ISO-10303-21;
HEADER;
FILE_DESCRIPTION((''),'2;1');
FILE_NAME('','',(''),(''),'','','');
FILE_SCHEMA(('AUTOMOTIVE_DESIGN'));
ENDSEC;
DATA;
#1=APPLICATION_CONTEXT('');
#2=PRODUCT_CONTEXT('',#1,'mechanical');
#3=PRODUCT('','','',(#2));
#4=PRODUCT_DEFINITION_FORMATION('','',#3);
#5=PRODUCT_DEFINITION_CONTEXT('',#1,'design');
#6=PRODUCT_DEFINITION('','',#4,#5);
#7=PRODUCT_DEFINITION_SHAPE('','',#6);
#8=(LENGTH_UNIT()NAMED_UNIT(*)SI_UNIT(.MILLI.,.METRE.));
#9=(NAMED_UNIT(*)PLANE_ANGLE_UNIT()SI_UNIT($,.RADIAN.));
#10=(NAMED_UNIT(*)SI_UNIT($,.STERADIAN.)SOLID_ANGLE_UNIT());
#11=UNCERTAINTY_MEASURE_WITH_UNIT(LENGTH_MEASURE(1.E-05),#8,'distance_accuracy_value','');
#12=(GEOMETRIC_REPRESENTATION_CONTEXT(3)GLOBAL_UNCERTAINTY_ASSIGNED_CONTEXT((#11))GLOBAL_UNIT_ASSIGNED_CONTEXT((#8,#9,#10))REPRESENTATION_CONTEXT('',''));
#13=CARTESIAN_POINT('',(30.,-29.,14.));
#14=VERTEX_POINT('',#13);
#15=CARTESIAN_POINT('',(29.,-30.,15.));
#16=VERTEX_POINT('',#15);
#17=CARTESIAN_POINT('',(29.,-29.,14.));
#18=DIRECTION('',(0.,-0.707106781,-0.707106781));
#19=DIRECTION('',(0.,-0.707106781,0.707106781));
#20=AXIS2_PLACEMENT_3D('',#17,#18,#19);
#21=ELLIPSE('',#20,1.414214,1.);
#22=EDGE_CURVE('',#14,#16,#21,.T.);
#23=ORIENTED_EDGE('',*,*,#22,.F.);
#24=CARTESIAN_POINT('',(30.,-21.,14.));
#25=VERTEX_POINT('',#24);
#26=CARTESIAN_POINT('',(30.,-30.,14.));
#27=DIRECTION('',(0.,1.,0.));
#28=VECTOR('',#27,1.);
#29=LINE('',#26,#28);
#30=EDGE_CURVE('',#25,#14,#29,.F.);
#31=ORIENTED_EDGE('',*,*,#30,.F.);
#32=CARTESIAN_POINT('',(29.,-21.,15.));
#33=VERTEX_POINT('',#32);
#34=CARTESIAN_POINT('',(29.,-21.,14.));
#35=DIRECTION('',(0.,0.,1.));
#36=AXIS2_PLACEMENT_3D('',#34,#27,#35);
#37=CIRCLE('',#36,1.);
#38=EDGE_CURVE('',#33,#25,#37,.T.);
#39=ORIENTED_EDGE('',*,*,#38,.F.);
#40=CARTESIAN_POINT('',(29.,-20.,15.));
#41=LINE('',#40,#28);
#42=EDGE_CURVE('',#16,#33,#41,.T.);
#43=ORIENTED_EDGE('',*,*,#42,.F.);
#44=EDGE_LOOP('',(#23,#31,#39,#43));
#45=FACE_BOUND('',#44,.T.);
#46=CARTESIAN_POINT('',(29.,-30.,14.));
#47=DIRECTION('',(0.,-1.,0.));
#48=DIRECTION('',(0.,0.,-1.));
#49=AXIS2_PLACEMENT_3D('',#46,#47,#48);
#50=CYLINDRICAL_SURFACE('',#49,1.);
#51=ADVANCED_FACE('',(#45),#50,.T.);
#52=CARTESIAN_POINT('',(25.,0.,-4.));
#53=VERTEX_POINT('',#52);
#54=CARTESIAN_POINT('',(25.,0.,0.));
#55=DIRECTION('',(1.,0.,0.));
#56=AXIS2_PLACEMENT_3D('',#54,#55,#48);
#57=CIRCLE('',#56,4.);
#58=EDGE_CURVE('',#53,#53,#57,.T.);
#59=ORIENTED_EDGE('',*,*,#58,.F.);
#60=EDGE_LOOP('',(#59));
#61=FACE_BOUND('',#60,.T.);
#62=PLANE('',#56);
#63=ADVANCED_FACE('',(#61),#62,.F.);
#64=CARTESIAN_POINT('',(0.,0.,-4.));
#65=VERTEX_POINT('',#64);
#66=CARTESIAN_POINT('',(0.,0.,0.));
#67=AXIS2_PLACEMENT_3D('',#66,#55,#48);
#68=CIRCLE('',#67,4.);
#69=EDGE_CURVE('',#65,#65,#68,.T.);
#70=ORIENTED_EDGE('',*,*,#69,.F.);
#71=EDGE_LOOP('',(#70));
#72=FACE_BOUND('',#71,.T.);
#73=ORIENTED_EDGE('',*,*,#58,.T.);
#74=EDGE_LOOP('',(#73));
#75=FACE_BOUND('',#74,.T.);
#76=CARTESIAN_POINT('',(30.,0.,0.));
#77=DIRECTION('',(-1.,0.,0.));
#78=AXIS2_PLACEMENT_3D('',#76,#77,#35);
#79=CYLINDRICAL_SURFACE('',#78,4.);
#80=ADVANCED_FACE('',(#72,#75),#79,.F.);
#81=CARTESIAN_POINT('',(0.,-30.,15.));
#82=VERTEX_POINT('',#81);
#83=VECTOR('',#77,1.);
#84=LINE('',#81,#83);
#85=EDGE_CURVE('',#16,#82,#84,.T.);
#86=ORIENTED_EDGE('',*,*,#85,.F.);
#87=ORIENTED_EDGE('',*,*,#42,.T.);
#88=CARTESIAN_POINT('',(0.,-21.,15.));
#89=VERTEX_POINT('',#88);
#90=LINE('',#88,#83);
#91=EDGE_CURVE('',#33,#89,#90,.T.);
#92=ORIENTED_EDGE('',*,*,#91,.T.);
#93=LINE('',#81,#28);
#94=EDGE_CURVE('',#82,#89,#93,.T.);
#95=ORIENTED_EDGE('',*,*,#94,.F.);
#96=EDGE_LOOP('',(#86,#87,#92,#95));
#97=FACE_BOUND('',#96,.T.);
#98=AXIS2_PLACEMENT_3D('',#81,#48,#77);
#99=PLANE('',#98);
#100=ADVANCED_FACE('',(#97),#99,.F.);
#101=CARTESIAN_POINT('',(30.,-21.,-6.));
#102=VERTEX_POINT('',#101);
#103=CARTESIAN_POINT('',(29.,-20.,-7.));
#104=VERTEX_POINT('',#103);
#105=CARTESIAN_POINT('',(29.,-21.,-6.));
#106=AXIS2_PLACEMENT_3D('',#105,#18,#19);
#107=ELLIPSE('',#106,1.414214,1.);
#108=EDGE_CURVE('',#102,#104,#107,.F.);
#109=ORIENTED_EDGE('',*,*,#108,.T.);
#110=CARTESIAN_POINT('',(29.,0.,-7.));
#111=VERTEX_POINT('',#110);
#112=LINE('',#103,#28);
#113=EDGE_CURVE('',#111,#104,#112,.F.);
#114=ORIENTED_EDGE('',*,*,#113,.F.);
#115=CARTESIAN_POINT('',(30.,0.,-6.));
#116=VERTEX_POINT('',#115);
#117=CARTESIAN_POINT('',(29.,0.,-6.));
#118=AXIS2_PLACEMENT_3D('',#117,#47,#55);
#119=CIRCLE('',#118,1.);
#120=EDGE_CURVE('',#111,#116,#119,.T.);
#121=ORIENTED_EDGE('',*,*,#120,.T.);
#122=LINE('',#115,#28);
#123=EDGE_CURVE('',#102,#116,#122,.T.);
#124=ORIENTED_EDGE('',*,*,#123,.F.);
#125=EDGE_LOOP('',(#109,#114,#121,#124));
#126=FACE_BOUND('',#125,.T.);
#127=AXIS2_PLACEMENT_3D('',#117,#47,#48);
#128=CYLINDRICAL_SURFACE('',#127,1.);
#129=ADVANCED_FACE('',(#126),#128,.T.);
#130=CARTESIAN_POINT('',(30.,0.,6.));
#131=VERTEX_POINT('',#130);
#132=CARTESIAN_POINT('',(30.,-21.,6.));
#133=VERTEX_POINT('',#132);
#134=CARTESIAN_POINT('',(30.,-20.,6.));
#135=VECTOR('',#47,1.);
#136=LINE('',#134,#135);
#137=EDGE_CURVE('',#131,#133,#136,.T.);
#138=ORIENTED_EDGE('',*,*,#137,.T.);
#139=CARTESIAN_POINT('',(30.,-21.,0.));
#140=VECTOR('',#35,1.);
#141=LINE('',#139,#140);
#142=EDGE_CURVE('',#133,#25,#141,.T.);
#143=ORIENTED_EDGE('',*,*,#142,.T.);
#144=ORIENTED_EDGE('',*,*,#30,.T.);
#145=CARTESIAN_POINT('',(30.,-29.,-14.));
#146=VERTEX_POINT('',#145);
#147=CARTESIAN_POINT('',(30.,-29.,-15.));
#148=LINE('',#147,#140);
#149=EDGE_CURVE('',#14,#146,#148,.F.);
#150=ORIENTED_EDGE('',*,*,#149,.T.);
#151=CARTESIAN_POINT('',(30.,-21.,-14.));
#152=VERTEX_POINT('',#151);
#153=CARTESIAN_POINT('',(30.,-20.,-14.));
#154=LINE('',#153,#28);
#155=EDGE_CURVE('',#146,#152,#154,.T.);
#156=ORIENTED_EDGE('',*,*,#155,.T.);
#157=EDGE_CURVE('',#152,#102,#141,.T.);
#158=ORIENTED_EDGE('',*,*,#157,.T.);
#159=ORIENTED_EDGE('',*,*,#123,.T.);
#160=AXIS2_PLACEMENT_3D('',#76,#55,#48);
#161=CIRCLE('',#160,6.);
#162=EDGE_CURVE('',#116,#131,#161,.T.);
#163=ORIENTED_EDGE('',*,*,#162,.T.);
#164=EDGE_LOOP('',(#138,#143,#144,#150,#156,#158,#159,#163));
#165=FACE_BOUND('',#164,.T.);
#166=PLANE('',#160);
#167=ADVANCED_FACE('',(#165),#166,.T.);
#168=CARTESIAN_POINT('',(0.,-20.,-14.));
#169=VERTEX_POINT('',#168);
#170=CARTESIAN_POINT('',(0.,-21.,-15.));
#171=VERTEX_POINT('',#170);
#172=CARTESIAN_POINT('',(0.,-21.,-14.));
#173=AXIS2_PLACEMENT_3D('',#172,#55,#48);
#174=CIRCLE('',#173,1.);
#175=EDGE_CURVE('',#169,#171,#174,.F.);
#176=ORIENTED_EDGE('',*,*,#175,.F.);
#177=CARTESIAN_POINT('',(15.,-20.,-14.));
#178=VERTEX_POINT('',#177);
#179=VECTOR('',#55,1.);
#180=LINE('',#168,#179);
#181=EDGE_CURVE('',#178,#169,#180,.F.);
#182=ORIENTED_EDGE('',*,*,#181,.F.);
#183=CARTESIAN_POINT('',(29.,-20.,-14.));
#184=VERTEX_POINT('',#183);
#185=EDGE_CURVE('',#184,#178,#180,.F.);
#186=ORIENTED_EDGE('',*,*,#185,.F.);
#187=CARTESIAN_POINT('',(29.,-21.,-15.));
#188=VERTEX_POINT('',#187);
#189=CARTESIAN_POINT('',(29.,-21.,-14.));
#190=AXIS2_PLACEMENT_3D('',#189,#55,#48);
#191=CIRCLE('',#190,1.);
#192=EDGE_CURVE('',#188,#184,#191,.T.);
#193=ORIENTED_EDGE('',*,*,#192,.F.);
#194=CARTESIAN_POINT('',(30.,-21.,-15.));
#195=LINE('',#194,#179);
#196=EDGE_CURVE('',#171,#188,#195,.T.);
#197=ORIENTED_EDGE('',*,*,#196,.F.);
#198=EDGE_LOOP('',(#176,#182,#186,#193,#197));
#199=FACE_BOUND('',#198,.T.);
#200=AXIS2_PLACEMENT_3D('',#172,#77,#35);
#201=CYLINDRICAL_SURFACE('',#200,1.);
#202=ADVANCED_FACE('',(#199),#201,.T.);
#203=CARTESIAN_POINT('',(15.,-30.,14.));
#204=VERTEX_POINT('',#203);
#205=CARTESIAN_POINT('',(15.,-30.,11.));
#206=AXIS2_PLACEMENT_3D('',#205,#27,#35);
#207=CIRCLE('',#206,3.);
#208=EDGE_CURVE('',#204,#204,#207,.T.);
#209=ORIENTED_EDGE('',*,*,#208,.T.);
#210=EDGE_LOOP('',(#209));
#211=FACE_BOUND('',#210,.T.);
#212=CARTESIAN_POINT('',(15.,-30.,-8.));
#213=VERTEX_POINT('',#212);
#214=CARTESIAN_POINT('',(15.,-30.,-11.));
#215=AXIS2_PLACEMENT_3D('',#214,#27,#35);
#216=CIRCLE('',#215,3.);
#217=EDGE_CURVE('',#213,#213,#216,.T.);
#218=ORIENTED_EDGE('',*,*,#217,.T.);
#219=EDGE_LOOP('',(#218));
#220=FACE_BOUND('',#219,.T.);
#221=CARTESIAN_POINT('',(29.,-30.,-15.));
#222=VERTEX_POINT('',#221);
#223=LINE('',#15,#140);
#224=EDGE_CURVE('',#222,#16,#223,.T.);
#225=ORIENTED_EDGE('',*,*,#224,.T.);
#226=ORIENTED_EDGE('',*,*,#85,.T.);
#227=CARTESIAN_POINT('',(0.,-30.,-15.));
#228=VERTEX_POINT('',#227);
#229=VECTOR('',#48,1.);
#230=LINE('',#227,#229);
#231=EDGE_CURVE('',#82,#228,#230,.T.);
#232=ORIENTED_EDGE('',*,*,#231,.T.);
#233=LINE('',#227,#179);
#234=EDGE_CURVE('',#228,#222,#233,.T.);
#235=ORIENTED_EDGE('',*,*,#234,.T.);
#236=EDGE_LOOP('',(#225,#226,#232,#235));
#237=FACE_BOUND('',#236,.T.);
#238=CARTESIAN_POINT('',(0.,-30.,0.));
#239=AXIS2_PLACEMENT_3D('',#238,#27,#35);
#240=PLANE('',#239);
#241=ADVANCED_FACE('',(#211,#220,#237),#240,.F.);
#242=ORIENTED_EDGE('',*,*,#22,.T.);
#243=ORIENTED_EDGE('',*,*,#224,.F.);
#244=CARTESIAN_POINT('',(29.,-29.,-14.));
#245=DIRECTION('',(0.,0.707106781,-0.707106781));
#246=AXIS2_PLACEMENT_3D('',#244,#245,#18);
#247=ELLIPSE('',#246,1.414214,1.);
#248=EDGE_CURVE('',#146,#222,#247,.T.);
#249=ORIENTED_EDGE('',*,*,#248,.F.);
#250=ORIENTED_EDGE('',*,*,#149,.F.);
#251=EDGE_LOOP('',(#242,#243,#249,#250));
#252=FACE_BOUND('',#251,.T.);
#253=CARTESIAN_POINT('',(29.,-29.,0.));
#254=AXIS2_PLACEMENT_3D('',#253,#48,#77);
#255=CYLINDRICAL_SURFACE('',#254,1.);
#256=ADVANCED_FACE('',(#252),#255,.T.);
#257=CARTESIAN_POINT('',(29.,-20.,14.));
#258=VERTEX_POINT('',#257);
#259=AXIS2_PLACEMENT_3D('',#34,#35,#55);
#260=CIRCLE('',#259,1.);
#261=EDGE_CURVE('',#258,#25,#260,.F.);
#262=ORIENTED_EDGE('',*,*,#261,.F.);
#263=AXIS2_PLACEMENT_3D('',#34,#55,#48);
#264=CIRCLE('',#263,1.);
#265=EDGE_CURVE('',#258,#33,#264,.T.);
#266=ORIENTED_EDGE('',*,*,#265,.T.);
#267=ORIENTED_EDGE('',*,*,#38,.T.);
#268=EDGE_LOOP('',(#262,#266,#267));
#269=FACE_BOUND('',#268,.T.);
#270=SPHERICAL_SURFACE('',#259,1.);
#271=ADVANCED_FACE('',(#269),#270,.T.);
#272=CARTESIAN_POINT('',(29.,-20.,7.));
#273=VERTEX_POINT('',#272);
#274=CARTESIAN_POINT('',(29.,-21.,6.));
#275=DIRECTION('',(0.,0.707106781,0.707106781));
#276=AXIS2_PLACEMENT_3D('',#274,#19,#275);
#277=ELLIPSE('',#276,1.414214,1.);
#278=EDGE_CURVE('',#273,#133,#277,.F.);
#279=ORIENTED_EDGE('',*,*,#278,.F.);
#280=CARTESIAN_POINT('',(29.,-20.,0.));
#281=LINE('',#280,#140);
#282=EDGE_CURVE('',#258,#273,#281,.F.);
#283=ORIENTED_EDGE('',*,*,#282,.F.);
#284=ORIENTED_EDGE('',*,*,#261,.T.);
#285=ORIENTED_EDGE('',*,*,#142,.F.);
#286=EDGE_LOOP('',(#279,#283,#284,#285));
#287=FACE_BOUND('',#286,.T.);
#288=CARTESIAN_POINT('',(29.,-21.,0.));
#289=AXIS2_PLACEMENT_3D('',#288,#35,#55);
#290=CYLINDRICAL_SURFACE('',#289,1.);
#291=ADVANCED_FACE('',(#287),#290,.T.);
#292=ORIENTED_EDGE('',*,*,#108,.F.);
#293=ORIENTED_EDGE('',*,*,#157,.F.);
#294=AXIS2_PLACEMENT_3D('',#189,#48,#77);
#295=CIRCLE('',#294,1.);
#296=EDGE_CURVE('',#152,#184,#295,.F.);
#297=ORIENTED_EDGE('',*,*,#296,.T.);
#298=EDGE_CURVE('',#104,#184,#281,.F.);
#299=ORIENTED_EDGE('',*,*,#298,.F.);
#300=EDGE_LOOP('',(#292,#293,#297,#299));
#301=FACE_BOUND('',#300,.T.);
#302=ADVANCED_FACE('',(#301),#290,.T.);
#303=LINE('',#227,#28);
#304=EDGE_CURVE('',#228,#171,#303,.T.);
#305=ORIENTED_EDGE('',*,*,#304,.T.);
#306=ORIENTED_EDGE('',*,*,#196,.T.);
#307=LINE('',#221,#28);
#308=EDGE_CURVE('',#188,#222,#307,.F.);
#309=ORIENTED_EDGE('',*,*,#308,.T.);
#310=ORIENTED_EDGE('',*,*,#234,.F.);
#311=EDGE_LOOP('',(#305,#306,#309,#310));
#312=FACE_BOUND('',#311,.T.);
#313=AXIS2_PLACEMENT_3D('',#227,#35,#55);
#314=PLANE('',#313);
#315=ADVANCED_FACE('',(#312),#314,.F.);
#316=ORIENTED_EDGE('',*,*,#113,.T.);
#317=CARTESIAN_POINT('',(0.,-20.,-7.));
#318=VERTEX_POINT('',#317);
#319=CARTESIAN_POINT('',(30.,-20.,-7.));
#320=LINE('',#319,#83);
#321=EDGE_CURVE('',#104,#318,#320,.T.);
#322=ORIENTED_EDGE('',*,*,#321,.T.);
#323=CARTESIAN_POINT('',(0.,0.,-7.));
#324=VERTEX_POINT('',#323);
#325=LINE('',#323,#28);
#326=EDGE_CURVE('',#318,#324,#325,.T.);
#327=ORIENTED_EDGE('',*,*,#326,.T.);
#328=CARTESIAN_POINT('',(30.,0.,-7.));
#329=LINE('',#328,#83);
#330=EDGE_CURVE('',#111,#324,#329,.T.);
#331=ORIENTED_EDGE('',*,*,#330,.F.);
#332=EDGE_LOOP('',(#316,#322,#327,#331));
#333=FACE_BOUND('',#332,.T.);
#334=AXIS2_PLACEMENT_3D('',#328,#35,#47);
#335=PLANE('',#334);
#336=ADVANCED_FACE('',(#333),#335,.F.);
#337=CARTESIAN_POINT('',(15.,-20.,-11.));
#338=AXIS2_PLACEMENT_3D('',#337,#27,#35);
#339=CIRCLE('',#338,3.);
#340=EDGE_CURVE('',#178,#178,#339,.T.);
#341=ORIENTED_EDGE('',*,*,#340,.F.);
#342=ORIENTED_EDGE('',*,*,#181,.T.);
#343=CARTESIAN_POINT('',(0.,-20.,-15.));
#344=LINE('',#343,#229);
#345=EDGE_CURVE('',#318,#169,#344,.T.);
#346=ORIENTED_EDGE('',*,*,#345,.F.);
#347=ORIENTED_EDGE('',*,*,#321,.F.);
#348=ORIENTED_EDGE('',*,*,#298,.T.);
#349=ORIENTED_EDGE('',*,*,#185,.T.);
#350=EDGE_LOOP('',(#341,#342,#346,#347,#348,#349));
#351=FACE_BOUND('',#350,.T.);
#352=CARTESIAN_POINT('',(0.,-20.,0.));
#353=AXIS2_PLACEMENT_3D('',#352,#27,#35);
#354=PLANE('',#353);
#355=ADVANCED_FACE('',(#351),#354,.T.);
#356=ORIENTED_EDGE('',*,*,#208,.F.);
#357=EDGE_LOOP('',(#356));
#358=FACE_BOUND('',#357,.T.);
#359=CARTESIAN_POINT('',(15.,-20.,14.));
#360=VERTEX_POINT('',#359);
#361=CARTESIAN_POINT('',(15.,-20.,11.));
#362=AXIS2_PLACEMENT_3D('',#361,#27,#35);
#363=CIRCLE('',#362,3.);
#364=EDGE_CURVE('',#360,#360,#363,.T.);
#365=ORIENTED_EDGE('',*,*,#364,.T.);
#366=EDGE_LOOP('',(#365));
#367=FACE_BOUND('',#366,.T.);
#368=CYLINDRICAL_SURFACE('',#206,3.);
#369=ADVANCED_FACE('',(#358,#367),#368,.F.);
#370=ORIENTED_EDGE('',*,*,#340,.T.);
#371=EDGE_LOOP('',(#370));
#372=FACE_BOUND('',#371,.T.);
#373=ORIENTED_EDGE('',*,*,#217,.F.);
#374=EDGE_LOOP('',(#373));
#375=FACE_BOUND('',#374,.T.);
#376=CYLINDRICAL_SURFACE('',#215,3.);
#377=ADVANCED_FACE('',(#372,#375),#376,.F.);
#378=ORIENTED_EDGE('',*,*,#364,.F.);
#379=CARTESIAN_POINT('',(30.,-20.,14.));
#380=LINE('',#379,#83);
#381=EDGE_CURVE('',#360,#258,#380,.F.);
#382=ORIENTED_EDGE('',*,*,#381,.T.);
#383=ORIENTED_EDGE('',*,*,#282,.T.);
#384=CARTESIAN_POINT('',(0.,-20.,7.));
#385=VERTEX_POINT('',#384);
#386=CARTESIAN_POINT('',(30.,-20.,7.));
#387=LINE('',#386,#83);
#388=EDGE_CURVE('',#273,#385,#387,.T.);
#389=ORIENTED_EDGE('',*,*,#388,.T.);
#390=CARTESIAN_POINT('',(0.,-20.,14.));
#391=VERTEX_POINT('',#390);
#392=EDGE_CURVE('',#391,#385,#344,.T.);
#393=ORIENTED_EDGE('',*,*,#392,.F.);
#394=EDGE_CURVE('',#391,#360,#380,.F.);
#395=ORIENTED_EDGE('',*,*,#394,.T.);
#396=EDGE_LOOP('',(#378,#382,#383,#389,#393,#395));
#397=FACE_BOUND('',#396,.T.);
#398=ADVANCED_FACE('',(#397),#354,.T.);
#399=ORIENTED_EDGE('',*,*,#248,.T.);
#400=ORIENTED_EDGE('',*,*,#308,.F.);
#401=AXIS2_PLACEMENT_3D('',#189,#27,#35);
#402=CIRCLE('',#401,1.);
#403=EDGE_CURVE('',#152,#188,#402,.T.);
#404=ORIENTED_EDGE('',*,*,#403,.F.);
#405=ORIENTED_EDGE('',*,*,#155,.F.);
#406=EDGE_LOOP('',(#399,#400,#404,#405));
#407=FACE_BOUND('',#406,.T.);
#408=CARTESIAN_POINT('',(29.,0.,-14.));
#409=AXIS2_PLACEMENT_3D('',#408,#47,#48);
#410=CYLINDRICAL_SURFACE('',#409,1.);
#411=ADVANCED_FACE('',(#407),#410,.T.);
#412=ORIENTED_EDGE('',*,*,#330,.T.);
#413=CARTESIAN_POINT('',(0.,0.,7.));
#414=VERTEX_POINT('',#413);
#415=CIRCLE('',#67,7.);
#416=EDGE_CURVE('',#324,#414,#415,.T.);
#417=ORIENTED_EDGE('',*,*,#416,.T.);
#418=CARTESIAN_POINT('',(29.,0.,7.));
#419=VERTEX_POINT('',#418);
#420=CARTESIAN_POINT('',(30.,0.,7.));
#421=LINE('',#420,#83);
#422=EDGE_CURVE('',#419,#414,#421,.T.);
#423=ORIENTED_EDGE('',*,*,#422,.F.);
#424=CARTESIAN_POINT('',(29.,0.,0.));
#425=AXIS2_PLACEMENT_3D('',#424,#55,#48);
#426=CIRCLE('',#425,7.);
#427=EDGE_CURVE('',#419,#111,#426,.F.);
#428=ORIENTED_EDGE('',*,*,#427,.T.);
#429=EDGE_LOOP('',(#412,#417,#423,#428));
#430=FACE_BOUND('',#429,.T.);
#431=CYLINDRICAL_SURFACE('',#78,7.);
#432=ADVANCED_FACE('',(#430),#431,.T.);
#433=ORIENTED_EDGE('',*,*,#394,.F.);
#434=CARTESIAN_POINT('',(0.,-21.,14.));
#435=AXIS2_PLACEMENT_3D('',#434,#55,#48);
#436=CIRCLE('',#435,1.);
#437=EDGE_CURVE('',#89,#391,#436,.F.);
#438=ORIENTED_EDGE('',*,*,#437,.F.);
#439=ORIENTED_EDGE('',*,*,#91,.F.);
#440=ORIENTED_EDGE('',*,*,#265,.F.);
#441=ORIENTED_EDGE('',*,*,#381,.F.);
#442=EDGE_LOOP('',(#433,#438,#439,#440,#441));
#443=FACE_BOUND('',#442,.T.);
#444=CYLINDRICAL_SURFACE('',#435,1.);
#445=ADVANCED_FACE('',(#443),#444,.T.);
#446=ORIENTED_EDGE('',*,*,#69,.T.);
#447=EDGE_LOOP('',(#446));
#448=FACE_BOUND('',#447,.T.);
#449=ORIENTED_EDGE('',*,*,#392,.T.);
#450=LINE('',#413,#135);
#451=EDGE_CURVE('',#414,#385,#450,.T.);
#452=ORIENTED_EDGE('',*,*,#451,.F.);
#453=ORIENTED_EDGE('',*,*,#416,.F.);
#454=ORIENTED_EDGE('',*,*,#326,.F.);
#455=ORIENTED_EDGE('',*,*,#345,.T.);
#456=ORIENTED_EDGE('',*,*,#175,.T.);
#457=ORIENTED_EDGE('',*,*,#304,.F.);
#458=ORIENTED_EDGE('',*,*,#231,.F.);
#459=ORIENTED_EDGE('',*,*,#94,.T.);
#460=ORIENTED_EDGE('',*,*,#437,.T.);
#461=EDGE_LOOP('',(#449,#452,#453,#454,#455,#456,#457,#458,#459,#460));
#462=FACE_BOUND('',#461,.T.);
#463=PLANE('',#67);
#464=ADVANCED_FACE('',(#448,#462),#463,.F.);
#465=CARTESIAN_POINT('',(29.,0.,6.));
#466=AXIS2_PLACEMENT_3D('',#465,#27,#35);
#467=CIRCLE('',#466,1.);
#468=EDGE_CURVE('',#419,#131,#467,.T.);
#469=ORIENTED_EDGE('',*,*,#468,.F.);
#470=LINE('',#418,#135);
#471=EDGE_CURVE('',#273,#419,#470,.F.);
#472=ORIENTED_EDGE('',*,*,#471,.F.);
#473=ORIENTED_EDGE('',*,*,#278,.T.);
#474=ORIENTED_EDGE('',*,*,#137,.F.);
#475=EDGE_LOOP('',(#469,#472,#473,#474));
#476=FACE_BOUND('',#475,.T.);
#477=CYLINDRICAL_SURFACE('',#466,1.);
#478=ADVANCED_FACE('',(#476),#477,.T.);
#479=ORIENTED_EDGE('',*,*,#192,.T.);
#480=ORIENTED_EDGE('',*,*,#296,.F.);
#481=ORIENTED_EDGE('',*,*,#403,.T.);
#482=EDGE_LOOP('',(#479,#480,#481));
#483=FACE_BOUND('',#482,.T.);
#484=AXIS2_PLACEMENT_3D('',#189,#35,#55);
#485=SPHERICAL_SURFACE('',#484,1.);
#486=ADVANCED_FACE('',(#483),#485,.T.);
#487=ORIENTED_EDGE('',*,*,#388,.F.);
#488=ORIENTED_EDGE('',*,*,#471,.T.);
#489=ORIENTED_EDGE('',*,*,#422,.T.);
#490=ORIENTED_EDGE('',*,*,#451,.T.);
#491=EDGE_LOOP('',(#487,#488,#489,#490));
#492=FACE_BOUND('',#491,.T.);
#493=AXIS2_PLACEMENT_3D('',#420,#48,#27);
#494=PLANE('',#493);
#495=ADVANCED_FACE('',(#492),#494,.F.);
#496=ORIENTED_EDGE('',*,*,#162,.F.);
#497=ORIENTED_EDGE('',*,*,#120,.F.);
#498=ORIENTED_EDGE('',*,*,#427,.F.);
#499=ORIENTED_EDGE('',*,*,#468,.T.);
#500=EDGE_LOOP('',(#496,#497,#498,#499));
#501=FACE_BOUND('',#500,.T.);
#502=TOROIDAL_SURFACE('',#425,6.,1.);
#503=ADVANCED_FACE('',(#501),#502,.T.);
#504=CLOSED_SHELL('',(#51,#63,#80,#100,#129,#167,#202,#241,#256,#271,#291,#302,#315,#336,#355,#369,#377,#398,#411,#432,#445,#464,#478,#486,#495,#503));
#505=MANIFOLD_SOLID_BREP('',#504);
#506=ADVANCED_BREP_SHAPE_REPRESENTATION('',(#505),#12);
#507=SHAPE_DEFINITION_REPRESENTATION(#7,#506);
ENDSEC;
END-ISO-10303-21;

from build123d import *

# Parameters (mm, degrees)
SKETCH1_R           = 4
BOSS_EXTRUDE3_DEPTH = 30
SKETCH3_W           = 30.000000000000004
SKETCH3_H           = 30
BOSS_EXTRUDE4_DEPTH = 10
SKETCH4_R           = 3.0000000000000004
CUT_EXTRUDE1_DEPTH  = 10
BOSS_EXTRUDE5_START = -5
SKETCH5_R           = 4
BOSS_EXTRUDE5_DEPTH = 5
FILLET2_R           = 1


with BuildPart() as part:
    # Sketch1 → Boss-Extrude3 (new body)
    with BuildSketch(Plane(origin=(0, 0, 0), x_dir=(0, 0, -1), z_dir=(1, 0, 0))):
        with BuildLine():
            Line((-6.999999999999999, 0), (-6.9999999999999964, -20))
            Line((-6.9999999999999964, -20), (6.9999999999999964, -20))
            Line((6.9999999999999964, -20), (6.999999999999999, 0))
            ThreePointArc((6.999999999999999, 0), (4.3e-16, 6.999999999999999), (-6.999999999999999, 0))
        make_face()
        Circle(SKETCH1_R, mode=Mode.SUBTRACT)
    extrude(amount=BOSS_EXTRUDE3_DEPTH)

    # Sketch3 → Boss-Extrude4 (add)
    with BuildSketch(Plane.XZ.offset(20)):
        with Locations((15.000000000000002, 1.78e-15)):
            Rectangle(SKETCH3_W, SKETCH3_H)
    extrude(amount=BOSS_EXTRUDE4_DEPTH)

    # Sketch4 → Cut-Extrude1 (cut)
    with BuildSketch(Plane(origin=(0, -20, 0), x_dir=(1, 0, 0), z_dir=(0, 1, 0))):
        with Locations((15, 10.999999999999996)):
            Circle(SKETCH4_R)
        with Locations((15, -11)):
            Circle(SKETCH4_R)
    extrude(amount=-CUT_EXTRUDE1_DEPTH, mode=Mode.SUBTRACT)

    # Sketch5 → Boss-Extrude5 (add)
    with BuildSketch(Plane(origin=(30, 0, 0), x_dir=(0, 0, -1), z_dir=(1, 0, 0)).offset(BOSS_EXTRUDE5_START)):
        Circle(SKETCH5_R)
    extrude(amount=BOSS_EXTRUDE5_DEPTH)

    # Fillet2
    fillet2_edges = [part.edges().sort_by_distance(p)[0] for p in [
        (30, -10, -6.999999999999998),
        (30, -20, -10.999999999999996),
        (30, -25, -14.999999999999998),
        (30, -30, 1.78e-15),
        (30, -25, 15.000000000000002),
        (30, -20, 10.999999999999998),
        (30, -10, 6.999999999999998),
        (30, 6.999999999999999, -1.09e-15),
        (15, -20, -14.999999999999998),
        (15, -20, 15.000000000000002),
    ]]
    fillet(fillet2_edges, radius=FILLET2_R)


solid = part.part
